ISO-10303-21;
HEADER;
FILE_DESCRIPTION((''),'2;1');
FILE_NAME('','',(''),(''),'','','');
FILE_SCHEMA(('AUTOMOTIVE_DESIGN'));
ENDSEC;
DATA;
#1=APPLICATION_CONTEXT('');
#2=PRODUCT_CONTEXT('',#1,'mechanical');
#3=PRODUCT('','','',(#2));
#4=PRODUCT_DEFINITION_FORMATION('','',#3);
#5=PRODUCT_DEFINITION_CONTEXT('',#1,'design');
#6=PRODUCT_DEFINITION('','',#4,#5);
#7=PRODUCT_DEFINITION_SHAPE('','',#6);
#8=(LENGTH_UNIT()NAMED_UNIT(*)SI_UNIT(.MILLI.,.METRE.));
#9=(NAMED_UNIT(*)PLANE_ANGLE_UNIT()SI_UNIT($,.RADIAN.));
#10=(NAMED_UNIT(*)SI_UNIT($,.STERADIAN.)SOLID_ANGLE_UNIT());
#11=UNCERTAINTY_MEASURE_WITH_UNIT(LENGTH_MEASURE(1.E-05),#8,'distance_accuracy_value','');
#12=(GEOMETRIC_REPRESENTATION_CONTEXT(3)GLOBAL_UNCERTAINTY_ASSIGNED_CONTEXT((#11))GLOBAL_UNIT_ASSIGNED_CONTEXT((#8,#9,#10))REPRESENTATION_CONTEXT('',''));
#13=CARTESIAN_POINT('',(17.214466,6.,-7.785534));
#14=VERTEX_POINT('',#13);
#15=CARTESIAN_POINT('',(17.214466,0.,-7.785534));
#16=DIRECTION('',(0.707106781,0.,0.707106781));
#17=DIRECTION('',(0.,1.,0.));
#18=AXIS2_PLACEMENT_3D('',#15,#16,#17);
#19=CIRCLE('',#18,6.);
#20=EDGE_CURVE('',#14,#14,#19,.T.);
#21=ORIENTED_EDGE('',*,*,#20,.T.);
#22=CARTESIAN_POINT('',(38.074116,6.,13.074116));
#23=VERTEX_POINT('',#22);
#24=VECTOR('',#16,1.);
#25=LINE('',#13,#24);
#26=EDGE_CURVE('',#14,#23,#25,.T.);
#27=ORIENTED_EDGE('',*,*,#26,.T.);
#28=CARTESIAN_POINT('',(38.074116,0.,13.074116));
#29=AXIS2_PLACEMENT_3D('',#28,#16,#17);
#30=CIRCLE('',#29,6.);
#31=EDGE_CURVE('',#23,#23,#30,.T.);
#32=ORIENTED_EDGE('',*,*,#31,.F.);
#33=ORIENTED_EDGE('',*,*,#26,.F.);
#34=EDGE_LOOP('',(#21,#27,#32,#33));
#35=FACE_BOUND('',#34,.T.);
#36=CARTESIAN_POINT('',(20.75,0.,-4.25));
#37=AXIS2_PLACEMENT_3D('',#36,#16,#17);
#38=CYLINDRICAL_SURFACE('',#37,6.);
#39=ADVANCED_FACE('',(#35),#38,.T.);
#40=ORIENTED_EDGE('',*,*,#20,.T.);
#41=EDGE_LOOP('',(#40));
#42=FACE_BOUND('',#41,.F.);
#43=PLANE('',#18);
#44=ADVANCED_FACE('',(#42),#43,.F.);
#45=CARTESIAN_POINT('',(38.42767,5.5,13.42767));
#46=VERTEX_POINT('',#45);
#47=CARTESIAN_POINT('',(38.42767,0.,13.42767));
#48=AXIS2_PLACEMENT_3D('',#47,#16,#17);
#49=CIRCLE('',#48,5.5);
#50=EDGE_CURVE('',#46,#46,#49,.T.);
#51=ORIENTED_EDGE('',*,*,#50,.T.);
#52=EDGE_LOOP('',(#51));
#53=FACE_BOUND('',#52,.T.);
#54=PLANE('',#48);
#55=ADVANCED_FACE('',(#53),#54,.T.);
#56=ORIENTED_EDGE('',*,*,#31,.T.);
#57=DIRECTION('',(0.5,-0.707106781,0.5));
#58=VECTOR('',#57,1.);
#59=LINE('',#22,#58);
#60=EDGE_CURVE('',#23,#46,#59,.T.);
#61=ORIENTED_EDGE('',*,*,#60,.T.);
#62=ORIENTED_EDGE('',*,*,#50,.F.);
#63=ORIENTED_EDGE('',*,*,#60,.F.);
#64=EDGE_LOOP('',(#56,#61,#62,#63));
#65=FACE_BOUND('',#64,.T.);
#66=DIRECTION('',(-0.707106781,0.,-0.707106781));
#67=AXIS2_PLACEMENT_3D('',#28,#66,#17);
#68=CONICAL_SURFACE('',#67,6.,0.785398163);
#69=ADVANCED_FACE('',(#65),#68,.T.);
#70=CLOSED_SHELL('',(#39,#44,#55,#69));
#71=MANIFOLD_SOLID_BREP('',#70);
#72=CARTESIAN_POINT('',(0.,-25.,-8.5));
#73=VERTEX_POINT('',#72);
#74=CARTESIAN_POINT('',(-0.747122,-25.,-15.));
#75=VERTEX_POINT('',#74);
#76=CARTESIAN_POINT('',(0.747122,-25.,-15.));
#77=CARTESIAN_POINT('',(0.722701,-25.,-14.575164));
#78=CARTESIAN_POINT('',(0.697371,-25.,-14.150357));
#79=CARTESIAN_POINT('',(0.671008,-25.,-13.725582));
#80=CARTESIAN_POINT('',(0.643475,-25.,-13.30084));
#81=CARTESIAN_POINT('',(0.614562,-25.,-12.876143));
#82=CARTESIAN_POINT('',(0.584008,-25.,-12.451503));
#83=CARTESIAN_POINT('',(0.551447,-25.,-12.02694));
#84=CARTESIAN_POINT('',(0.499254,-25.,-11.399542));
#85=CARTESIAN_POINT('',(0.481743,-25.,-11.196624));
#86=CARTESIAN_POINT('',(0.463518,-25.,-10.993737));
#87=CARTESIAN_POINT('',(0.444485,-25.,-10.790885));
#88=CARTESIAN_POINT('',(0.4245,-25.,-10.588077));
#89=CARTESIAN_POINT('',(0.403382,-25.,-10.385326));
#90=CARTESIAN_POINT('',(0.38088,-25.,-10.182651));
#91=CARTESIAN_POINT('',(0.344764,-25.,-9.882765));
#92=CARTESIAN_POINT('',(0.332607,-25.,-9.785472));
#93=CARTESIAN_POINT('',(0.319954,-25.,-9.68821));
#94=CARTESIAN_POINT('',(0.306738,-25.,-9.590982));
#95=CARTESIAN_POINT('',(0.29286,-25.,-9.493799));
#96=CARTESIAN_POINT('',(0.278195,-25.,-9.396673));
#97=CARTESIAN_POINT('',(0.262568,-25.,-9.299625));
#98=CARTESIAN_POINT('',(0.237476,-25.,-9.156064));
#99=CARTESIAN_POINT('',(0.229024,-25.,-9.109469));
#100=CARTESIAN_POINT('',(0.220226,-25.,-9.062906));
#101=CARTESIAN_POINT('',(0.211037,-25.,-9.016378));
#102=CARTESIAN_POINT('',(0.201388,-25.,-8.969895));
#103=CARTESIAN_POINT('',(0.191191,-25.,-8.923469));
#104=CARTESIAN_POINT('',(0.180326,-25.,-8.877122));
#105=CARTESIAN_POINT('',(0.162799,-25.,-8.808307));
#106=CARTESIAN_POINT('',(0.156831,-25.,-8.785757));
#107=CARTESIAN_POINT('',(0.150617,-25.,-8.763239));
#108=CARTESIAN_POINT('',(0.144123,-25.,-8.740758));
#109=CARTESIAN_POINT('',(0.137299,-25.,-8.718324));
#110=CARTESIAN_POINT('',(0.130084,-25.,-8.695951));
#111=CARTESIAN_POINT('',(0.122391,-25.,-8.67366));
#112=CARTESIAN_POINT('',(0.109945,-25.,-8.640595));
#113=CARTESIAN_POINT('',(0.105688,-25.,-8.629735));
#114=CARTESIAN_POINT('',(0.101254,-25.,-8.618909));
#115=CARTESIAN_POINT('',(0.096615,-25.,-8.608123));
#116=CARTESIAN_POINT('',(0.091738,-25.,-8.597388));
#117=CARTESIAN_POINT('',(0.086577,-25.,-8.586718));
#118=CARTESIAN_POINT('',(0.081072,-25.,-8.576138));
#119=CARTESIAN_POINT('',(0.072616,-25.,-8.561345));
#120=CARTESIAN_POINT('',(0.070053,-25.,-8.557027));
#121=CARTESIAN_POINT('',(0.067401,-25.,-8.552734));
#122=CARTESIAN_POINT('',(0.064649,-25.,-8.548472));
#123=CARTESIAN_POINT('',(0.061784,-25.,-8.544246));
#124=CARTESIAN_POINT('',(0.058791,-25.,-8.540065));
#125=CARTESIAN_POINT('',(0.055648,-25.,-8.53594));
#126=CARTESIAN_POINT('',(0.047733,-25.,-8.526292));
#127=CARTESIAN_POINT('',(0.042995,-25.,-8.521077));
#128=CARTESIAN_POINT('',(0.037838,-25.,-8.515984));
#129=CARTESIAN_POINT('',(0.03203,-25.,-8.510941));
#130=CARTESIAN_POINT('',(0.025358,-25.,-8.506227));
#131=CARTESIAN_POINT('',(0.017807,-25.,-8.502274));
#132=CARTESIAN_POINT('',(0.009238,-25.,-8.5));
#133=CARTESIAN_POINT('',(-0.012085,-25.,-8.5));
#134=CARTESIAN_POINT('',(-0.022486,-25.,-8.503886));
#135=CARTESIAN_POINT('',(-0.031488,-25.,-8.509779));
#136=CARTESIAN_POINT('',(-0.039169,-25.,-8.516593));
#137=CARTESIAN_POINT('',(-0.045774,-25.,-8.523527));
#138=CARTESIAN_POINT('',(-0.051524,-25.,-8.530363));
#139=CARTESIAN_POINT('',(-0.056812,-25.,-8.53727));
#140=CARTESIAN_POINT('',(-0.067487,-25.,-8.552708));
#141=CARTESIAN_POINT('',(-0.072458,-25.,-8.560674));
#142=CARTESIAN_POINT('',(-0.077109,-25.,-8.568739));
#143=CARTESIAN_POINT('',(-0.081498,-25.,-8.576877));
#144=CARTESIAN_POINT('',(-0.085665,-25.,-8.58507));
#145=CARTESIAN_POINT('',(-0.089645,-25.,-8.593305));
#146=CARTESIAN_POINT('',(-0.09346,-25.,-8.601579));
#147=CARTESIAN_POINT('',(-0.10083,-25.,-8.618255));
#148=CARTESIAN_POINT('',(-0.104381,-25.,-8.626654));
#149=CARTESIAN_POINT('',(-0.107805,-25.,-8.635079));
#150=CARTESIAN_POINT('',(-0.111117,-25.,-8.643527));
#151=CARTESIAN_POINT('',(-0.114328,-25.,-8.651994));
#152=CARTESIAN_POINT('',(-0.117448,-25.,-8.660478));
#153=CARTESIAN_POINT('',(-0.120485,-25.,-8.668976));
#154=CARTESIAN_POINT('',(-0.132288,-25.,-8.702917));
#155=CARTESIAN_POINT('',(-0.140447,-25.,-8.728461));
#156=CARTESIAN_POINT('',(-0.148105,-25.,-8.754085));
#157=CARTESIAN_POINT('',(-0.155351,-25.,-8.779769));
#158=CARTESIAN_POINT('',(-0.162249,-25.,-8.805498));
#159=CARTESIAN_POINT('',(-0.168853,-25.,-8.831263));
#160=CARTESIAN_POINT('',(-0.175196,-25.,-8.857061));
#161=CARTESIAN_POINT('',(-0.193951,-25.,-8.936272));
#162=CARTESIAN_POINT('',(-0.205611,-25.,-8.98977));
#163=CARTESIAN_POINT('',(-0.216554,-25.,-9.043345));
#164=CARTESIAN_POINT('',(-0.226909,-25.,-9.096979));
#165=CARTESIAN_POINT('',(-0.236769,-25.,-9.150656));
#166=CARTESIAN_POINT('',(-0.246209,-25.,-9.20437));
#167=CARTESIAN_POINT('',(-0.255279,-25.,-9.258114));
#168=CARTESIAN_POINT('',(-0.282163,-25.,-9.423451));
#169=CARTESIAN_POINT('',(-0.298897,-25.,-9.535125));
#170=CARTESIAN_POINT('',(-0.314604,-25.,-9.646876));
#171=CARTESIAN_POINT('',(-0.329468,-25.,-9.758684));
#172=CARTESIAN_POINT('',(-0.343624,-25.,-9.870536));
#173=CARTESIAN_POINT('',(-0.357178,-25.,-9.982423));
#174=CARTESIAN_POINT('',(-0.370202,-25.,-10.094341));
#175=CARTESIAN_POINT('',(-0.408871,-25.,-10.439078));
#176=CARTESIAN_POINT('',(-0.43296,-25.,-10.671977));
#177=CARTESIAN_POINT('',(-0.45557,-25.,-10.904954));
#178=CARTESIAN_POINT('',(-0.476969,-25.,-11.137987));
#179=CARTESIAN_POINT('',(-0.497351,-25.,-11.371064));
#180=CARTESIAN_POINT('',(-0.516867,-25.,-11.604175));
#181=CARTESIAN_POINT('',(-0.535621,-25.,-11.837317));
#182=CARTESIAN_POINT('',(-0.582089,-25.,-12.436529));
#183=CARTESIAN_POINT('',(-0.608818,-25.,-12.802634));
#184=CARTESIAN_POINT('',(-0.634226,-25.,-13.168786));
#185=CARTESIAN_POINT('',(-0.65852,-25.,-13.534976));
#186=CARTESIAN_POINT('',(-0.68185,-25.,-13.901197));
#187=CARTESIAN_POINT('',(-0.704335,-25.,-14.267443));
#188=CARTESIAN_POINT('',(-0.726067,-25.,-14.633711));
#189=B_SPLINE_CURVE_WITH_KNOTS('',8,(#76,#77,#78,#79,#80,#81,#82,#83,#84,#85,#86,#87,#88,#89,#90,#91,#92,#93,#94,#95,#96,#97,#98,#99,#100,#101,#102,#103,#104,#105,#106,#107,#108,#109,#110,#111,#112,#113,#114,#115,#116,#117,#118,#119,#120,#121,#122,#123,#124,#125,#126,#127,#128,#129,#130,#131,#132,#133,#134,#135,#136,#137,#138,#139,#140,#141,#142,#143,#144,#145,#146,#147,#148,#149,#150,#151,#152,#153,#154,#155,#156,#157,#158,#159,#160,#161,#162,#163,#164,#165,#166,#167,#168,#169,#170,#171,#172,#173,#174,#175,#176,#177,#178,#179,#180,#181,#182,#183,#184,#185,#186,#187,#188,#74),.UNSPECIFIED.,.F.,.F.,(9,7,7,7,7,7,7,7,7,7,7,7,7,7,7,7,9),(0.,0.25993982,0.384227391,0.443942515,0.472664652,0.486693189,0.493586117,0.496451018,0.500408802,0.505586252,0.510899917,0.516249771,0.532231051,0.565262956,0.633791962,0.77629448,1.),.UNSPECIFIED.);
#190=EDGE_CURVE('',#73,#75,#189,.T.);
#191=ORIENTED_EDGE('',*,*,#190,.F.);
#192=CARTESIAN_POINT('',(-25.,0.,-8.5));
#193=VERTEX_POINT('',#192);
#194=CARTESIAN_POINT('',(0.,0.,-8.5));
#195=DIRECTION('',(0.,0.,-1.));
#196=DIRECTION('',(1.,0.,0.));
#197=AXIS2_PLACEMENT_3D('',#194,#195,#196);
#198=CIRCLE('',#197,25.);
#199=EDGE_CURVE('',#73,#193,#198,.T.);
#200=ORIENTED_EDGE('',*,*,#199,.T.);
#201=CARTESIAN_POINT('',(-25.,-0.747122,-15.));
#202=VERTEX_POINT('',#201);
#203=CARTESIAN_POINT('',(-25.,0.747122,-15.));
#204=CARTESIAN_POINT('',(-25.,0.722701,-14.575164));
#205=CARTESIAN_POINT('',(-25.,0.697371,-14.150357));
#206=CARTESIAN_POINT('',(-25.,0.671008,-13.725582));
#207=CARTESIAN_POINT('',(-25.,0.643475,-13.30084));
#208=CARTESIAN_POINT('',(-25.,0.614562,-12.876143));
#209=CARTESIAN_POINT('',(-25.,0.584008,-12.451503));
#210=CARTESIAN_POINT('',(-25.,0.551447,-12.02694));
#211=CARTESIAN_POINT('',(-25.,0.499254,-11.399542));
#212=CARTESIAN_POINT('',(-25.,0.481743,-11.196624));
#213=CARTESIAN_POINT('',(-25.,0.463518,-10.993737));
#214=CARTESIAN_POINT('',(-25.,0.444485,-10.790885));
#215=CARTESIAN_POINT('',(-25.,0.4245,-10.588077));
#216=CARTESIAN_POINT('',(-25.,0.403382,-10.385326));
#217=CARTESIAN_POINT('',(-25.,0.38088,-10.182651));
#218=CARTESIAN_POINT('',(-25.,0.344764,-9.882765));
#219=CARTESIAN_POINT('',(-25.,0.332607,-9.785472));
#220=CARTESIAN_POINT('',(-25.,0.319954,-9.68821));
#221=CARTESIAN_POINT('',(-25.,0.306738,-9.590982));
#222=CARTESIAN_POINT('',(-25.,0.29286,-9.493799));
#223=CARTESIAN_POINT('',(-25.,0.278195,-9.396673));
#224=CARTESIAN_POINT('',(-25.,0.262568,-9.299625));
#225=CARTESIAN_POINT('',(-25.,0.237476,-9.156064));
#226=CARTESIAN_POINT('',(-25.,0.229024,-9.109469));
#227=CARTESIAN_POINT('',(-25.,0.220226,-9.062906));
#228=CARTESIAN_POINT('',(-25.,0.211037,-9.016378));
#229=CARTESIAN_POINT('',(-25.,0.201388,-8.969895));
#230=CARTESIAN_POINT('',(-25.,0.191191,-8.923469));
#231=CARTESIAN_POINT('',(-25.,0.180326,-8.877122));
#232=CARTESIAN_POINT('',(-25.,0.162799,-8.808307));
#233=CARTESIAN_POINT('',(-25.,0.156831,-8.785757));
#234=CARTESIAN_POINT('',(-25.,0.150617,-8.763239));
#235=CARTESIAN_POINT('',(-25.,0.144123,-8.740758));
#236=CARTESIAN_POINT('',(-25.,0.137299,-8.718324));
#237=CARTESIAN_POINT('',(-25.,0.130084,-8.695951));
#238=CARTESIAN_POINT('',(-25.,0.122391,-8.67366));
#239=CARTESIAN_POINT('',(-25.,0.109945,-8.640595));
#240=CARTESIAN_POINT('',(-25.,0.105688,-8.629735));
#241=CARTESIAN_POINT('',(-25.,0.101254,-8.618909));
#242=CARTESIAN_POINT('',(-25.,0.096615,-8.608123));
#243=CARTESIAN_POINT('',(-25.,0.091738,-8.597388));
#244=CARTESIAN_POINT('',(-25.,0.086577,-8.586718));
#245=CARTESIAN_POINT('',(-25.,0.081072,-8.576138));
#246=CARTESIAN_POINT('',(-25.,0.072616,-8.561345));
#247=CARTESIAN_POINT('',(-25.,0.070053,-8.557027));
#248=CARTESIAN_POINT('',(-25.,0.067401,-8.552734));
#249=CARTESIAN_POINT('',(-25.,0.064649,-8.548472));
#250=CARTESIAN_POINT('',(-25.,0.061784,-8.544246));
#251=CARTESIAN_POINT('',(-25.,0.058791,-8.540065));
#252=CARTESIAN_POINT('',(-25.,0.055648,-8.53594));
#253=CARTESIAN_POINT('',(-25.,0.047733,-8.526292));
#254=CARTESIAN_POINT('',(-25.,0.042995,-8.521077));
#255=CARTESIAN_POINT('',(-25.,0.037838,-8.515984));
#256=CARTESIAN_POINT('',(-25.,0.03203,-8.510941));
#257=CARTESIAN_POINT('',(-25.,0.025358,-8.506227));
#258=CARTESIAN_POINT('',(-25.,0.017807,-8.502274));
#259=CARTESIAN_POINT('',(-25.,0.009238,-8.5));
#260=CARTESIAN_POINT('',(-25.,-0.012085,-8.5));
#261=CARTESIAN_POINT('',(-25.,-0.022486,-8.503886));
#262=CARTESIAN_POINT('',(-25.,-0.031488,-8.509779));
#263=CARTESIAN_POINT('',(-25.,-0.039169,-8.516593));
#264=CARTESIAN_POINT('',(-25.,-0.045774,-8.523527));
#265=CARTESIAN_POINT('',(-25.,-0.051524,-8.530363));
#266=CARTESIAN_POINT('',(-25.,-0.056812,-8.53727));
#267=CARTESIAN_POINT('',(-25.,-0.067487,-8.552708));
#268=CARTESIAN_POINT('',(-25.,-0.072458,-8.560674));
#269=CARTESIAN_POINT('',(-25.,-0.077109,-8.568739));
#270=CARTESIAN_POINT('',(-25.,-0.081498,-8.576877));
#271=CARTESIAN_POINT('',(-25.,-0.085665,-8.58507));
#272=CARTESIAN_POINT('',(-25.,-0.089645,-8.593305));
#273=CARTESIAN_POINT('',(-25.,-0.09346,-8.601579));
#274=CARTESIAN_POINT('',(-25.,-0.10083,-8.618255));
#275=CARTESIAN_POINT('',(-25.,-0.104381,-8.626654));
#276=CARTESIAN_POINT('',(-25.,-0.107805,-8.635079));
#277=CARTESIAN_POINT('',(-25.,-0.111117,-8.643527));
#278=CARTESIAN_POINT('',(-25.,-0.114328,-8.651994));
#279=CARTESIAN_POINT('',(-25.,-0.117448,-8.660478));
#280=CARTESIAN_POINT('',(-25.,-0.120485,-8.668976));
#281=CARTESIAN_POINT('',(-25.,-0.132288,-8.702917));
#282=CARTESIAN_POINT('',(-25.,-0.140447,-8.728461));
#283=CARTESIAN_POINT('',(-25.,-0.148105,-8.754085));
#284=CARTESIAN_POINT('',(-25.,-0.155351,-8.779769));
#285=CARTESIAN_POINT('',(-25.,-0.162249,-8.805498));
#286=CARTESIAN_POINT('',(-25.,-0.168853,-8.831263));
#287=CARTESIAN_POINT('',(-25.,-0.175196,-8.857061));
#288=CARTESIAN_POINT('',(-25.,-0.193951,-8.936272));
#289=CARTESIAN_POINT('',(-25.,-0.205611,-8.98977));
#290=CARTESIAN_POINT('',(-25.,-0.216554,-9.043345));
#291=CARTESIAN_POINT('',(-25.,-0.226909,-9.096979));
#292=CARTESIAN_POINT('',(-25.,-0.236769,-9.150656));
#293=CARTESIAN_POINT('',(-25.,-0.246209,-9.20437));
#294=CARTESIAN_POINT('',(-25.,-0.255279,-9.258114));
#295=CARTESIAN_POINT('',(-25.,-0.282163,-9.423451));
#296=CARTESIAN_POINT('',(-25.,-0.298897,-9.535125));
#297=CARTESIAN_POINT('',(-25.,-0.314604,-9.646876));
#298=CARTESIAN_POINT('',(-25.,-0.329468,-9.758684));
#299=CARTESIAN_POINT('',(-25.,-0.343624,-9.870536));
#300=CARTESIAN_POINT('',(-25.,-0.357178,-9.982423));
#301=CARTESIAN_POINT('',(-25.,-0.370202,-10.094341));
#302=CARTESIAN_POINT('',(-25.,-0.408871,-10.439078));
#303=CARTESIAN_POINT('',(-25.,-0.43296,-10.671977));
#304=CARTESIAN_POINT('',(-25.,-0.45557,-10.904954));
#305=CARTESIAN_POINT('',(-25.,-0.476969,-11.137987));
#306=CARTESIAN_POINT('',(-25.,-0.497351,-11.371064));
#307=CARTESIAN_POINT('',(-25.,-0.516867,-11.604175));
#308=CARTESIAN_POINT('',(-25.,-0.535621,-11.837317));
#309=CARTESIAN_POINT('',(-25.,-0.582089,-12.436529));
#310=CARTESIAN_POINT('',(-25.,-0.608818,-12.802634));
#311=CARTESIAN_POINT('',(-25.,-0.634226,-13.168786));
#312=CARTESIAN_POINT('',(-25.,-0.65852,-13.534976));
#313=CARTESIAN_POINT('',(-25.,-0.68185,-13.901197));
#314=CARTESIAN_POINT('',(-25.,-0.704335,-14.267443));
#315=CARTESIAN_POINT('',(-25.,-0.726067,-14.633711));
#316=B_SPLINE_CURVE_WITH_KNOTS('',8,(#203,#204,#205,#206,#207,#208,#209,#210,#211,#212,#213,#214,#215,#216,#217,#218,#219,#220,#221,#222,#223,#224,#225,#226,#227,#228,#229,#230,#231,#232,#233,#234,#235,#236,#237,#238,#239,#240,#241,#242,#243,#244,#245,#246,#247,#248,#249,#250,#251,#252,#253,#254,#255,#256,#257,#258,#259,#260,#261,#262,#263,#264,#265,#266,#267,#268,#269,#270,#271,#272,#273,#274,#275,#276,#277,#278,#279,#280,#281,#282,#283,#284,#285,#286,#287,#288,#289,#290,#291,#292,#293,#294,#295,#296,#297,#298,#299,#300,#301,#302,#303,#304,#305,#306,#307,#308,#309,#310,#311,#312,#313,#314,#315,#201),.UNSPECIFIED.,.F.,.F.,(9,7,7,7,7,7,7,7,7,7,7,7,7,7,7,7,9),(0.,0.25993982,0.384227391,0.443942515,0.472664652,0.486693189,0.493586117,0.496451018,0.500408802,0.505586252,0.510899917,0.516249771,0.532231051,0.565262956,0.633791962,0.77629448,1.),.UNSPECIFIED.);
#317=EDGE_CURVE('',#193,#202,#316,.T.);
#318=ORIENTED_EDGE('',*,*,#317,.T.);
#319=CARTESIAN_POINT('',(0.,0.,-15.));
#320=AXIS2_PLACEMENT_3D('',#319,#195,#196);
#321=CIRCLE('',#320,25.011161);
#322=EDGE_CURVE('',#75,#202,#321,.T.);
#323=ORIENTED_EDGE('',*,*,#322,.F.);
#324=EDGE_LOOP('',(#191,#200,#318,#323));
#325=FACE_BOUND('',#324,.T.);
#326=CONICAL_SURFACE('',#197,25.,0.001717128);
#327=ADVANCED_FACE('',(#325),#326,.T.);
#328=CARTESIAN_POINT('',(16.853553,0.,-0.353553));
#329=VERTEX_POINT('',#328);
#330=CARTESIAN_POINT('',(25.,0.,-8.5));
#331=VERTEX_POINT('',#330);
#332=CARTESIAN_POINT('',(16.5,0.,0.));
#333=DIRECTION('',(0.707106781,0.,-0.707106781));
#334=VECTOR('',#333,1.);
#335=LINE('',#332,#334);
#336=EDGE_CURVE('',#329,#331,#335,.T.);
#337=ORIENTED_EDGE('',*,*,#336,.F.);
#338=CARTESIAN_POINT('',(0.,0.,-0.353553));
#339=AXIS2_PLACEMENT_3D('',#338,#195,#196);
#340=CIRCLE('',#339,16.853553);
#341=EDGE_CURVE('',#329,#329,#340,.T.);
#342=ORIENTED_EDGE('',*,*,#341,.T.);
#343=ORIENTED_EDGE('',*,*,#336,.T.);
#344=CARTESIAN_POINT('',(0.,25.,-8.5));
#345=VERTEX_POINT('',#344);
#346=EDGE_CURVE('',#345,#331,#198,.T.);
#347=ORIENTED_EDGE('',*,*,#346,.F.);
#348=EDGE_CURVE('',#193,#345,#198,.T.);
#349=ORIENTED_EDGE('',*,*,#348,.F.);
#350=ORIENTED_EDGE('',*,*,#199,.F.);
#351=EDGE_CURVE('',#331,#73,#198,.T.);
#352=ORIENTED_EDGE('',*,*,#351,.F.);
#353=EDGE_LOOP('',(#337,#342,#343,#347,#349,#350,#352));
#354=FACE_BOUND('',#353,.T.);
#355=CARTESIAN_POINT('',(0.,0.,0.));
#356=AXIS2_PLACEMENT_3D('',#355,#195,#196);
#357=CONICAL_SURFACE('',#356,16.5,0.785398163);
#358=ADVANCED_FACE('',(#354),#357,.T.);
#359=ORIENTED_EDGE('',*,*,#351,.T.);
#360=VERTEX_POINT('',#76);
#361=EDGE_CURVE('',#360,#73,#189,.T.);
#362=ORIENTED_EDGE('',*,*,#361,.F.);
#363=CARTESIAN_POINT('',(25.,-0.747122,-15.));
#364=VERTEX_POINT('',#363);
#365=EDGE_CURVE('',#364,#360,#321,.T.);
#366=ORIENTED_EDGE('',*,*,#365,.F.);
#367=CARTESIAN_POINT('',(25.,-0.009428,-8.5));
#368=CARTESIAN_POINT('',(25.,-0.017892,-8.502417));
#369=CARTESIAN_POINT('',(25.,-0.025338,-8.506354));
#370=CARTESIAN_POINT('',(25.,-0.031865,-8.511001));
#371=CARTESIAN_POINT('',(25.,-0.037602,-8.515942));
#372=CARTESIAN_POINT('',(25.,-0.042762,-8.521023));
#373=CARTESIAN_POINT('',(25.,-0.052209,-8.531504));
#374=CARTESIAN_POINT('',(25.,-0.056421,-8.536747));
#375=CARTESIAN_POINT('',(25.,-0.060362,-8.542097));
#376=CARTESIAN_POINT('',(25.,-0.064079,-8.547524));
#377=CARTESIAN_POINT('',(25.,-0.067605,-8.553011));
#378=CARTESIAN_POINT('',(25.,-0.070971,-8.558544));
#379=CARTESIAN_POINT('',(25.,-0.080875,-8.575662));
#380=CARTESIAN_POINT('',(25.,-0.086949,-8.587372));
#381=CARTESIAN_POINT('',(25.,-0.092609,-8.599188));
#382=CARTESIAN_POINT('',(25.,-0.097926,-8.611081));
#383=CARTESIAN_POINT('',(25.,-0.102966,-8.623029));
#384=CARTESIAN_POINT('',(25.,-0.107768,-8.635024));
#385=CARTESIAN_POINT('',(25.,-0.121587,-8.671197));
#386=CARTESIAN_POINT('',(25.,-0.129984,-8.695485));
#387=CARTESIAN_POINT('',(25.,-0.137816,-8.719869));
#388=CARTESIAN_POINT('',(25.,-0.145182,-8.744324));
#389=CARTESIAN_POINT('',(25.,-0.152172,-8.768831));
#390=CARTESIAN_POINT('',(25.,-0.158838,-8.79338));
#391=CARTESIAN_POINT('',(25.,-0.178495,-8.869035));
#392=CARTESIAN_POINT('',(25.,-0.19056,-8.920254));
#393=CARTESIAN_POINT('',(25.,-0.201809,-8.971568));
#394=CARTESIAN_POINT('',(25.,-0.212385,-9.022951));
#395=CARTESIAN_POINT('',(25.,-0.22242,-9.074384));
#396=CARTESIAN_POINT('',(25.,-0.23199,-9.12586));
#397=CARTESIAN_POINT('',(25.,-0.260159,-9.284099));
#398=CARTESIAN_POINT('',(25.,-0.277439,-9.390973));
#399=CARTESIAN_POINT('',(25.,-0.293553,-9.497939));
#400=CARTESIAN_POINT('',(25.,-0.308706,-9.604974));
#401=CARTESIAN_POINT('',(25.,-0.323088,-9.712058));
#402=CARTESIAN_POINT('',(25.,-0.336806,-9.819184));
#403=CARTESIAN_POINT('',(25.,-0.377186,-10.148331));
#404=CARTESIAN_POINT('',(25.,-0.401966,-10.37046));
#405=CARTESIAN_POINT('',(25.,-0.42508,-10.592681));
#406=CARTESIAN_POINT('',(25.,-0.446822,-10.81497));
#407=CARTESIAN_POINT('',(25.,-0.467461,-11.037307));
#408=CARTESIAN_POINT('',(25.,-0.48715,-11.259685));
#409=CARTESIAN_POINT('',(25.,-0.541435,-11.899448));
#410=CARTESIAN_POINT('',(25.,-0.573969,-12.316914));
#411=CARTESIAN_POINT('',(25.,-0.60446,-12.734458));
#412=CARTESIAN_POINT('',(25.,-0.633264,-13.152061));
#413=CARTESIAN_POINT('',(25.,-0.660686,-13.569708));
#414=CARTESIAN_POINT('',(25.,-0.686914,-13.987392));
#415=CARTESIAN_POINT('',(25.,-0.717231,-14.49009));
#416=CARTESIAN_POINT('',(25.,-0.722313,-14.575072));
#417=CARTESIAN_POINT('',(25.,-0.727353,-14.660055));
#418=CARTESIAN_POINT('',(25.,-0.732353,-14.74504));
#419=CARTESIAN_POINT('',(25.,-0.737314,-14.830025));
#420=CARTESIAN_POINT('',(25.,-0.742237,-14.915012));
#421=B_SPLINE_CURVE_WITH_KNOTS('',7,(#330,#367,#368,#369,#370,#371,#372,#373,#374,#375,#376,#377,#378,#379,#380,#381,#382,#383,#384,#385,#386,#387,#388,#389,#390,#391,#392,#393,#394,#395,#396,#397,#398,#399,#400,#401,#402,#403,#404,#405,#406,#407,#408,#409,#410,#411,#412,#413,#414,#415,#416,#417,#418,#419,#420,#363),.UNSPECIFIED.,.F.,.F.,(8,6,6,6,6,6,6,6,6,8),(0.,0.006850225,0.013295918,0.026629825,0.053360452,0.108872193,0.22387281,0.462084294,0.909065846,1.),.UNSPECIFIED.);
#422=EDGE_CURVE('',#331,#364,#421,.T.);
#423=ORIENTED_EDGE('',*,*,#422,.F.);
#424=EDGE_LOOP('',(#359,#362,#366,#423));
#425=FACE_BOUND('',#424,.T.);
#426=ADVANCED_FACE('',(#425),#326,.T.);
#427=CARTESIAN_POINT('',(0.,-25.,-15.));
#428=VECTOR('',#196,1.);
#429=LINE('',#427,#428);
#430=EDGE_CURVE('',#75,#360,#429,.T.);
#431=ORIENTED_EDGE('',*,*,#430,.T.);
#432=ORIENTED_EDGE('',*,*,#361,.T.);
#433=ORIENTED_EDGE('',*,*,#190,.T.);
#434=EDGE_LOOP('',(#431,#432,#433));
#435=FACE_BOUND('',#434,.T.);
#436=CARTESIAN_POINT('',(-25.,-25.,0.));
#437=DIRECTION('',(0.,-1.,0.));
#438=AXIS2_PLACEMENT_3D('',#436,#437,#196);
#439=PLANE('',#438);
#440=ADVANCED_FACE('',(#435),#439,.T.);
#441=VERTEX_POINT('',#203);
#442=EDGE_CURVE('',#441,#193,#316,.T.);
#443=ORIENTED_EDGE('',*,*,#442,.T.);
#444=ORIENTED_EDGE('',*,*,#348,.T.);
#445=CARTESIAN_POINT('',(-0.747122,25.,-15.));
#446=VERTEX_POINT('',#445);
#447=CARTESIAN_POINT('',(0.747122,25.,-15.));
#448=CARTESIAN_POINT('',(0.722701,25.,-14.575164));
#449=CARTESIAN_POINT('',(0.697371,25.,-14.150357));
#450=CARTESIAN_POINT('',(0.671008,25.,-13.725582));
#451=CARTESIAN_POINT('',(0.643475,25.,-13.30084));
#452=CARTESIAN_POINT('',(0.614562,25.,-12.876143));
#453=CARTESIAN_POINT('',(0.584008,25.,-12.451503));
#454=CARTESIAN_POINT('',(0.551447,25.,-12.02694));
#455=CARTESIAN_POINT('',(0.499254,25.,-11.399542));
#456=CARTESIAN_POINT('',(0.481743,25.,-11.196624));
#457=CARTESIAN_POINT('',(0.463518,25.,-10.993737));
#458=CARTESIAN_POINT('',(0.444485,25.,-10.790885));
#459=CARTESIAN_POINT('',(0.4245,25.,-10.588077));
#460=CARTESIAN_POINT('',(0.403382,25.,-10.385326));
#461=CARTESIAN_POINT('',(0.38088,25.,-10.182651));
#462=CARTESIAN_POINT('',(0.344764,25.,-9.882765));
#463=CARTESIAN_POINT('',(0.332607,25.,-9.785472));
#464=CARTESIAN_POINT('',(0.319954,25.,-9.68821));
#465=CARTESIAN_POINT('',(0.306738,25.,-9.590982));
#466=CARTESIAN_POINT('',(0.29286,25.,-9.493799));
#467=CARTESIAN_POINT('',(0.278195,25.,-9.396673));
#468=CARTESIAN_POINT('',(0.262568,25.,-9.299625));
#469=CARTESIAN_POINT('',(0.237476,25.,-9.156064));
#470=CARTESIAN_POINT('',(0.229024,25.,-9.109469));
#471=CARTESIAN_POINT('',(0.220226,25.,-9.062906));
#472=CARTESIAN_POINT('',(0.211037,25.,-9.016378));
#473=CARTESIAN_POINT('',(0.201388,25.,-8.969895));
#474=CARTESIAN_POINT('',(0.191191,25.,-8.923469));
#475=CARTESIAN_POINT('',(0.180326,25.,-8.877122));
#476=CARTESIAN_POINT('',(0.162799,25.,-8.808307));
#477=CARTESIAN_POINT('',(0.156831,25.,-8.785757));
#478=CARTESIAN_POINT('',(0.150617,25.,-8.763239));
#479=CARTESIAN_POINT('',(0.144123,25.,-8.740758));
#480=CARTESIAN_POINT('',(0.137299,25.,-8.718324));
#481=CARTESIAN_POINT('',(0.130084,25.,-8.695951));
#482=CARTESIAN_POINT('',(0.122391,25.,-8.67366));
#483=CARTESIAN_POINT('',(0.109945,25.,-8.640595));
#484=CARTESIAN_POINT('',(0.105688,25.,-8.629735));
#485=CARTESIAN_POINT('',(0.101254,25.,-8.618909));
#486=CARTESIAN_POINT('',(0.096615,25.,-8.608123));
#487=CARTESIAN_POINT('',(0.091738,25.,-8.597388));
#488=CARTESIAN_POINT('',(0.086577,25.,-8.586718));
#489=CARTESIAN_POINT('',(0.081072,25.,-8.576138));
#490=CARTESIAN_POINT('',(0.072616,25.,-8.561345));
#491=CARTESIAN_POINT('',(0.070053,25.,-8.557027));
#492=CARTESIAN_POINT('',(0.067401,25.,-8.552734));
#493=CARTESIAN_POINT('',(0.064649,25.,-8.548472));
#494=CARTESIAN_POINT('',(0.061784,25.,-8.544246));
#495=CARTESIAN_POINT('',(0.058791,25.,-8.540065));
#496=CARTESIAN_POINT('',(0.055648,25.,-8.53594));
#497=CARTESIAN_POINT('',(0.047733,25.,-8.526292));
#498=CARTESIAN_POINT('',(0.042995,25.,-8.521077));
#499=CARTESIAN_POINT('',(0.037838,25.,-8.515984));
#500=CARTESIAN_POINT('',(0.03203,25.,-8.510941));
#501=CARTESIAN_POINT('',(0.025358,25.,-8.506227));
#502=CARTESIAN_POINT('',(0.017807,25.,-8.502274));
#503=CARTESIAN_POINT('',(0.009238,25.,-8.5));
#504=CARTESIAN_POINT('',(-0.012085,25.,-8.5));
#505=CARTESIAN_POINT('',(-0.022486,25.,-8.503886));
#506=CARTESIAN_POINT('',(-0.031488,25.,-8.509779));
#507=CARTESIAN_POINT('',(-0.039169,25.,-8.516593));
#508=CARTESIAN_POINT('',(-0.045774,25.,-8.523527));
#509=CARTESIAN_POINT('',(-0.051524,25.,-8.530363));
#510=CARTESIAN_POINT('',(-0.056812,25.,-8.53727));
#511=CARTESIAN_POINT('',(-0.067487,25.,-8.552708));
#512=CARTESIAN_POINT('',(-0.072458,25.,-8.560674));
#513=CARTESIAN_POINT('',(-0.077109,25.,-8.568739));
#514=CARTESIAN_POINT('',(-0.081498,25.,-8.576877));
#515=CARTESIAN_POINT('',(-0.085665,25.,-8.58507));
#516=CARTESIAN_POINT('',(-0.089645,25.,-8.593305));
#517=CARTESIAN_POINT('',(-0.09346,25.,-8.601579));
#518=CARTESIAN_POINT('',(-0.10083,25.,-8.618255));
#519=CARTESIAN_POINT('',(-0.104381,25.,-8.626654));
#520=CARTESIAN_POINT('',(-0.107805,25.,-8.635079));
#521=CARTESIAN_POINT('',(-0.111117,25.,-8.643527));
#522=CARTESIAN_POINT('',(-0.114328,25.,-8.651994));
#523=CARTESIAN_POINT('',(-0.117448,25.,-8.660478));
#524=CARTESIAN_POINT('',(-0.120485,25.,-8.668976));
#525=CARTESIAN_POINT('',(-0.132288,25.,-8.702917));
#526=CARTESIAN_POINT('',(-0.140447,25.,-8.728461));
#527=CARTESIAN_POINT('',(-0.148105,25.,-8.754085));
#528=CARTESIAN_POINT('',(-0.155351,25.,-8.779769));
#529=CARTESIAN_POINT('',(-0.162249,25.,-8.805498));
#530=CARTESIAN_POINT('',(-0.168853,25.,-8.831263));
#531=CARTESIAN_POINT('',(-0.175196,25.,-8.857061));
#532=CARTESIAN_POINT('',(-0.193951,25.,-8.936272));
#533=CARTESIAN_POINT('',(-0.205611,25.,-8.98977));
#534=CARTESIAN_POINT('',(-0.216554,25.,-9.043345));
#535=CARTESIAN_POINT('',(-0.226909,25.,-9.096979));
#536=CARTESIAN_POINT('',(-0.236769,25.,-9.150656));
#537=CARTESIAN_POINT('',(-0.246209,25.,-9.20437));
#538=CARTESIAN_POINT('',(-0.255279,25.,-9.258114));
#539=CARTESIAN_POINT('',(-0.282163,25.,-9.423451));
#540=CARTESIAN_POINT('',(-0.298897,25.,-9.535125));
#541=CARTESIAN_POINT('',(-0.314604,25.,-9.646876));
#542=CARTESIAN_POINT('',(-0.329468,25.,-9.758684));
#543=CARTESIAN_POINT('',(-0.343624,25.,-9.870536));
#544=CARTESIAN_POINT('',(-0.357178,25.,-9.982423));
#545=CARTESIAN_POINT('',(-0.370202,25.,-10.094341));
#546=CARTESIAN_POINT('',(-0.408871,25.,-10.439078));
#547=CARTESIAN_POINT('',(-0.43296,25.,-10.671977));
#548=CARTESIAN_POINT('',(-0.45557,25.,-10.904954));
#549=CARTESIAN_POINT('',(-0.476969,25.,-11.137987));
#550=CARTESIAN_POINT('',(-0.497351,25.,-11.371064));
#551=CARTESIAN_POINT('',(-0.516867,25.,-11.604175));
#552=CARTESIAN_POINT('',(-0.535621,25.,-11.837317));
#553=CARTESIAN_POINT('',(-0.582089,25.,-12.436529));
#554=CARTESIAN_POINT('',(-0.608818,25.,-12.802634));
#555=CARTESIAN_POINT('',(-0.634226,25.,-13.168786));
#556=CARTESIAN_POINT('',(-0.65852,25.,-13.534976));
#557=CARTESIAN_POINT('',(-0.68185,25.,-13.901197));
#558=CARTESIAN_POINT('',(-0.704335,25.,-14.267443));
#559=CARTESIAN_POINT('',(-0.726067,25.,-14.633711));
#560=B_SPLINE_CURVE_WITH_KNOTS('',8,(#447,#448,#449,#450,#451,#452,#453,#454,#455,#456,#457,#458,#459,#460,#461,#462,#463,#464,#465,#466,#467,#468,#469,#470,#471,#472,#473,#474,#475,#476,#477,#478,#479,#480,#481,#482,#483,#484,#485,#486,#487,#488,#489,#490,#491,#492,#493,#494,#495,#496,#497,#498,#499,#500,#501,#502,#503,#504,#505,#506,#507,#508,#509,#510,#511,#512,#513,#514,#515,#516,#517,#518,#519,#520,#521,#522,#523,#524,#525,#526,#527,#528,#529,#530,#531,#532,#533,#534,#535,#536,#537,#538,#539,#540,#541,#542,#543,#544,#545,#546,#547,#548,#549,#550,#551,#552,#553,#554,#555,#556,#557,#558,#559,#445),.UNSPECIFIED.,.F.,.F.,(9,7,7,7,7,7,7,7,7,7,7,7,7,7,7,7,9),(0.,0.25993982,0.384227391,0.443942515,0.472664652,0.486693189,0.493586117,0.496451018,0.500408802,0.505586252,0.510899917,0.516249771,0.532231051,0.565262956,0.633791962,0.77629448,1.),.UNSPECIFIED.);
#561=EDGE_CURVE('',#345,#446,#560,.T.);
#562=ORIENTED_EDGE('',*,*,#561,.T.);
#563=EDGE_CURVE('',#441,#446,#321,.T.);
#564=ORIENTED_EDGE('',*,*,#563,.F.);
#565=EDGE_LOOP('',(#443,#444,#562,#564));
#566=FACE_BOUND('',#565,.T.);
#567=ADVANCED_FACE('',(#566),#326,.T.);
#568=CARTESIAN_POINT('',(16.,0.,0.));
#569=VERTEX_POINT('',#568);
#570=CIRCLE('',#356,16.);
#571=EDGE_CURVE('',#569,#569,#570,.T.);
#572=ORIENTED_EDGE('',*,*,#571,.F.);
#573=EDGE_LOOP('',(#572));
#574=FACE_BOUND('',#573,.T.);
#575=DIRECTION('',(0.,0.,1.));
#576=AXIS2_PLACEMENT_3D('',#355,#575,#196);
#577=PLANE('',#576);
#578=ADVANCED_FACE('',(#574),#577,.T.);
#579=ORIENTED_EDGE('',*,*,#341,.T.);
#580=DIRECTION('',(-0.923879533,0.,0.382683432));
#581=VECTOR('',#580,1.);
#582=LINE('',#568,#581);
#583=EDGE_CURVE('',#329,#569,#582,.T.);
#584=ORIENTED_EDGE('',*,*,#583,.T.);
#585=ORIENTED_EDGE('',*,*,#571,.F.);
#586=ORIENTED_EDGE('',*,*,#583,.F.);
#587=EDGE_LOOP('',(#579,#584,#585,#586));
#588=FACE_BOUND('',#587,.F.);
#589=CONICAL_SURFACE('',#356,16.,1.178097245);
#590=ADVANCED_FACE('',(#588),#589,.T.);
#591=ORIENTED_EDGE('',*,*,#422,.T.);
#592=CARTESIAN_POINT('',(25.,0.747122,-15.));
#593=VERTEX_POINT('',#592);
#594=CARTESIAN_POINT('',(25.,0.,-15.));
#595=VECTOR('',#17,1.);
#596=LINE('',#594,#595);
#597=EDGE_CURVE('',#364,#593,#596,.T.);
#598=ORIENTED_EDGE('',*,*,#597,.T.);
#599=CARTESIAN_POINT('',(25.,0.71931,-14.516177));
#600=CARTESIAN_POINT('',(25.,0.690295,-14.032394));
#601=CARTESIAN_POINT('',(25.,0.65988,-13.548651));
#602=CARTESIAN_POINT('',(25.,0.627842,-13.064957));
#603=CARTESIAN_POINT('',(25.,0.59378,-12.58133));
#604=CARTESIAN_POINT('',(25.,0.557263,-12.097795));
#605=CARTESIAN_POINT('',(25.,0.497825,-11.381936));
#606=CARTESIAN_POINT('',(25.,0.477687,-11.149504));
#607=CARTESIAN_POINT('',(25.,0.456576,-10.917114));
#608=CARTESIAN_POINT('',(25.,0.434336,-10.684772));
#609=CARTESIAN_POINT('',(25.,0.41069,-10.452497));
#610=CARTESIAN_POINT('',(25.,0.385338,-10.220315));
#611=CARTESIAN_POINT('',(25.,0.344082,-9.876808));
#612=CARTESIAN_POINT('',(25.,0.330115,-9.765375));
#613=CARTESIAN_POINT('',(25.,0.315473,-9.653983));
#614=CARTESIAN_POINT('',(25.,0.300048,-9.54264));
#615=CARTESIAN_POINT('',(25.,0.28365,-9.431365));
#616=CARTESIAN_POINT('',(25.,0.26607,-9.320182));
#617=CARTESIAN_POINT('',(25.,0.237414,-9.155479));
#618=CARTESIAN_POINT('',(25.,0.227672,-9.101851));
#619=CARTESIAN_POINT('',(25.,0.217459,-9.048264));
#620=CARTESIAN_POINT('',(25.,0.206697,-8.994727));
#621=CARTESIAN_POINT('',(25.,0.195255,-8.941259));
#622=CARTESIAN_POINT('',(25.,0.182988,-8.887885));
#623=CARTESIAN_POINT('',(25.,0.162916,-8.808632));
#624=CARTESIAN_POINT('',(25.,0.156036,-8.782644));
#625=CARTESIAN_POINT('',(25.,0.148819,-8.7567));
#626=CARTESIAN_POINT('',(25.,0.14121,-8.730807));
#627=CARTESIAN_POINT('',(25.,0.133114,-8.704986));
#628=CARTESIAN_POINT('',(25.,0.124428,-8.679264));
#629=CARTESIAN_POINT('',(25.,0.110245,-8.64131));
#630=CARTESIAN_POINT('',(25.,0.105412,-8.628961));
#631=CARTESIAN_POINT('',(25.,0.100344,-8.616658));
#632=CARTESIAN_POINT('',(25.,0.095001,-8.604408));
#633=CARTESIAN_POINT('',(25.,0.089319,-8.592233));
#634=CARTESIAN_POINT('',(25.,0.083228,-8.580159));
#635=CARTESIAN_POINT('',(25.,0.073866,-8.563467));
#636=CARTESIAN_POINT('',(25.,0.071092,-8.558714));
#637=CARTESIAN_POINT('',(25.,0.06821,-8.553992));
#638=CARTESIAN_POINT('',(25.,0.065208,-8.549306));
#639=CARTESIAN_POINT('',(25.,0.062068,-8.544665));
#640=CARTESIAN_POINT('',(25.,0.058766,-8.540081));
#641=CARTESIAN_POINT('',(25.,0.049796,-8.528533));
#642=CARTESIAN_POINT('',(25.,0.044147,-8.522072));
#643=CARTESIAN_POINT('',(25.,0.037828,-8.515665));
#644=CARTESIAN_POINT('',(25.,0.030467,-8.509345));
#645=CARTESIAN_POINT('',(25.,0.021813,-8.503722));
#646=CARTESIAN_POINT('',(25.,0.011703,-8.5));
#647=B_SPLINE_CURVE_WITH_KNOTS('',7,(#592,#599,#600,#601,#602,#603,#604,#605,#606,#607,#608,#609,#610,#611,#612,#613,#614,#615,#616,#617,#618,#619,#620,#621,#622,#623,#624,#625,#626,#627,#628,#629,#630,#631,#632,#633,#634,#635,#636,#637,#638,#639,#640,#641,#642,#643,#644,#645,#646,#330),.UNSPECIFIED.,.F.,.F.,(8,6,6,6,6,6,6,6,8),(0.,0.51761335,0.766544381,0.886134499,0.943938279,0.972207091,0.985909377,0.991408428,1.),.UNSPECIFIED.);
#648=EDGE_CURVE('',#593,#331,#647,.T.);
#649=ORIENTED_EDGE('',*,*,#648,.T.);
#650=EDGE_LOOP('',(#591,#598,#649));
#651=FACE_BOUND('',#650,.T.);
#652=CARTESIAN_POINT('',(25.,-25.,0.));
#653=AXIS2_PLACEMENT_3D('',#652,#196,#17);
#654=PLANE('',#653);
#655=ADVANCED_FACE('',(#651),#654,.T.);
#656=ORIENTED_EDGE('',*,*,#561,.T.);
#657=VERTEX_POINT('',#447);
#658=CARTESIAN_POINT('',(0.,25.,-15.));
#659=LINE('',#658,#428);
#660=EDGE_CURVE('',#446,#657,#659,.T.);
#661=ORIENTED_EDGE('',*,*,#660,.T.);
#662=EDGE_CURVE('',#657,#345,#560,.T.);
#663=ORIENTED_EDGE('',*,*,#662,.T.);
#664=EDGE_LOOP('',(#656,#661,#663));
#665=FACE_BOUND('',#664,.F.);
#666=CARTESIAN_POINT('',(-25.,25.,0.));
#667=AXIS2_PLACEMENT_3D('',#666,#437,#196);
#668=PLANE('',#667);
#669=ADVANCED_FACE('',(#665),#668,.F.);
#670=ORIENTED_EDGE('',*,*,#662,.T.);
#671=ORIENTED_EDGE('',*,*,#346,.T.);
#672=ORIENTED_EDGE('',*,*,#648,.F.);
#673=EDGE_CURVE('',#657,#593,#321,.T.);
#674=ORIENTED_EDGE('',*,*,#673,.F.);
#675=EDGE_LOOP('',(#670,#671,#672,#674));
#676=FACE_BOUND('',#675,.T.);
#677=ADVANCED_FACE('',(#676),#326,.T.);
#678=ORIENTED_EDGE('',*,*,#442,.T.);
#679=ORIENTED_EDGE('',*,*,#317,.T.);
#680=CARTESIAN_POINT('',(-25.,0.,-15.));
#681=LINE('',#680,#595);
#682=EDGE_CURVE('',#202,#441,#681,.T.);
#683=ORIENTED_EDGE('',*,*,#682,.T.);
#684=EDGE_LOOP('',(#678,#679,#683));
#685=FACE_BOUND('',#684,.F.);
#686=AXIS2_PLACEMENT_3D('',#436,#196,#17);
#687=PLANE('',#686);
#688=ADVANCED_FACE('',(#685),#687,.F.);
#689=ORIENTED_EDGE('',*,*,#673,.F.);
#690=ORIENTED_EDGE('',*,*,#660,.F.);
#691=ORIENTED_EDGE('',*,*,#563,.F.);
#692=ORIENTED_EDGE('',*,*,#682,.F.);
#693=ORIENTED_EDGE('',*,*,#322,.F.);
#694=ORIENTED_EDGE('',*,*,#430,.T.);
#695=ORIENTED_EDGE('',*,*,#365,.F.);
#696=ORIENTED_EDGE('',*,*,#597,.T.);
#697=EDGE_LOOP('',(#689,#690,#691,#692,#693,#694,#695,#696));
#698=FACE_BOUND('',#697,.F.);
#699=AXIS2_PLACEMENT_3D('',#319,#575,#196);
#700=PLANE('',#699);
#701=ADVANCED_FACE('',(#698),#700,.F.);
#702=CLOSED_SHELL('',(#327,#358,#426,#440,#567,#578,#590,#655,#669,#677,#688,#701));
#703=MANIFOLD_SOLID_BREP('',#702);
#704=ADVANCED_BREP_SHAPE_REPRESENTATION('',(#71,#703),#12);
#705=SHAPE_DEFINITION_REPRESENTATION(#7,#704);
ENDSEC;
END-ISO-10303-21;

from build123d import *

# Parameters (mm, degrees)
F0_W          = 50
F0_H          = 50
F1_DEPTH      = 15
F2_SIZE       = 8.5
F3_R          = 6
F6_DEPTH      = 25
F6_DEPTH_BACK = 5
F7_SIZE       = 0.5
F7_2_SIZE     = 0.5


# Not quite as in the source:
# - a feature names something its author has since deleted; it is built from what else it names


with BuildPart() as f1:
    # F0 (on Top) → F1 (new body)
    with BuildSketch(Plane.XY):
        Rectangle(F0_W, F0_H)
    extrude(amount=-F1_DEPTH)

    # F2
    f2_edges = [f1.edges().sort_by_distance(p)[0] for p in [
        (25, 0, 0),
    ]]
    chamfer(f2_edges, length=F2_SIZE)

    # F4 (on Front) → F5 (revolve, cut)
    with BuildSketch(Plane.XZ):
        Polygon((16.5, 0), (25, -8.5), (25.0111613423, -15), (57.6415769756, -15), (57.6415769756, 0), align=None)
    revolve(axis=Axis((0, 0, -4.25), (0, 0, -1)), mode=Mode.SUBTRACT)

    # F7#2
    f7_2_edges = [f1.edges().sort_by_distance(p)[0] for p in [
        (-16.5, 0, 0),
    ]]
    chamfer(f7_2_edges, length=F7_2_SIZE)


with BuildPart() as f6:
    # F3 (on face) → F6 (new body, two sides)
    with BuildSketch(Plane(origin=(8.25, 0, 8.25), x_dir=(0, 1, 0), z_dir=(0.7071067812, 0, 0.7071067812))) as f6_sk:
        with Locations((0, -17.6776695297)):
            Circle(F3_R)
    extrude(amount=F6_DEPTH)
    extrude(f6_sk.sketch, amount=-F6_DEPTH_BACK)

    # F7
    f7_edges = [f6.edges().sort_by_distance(p)[0] for p in [
        (38.42767, -6, 13.42767),
    ]]
    chamfer(f7_edges, length=F7_SIZE)


solid = Compound([f1.part, f6.part])
